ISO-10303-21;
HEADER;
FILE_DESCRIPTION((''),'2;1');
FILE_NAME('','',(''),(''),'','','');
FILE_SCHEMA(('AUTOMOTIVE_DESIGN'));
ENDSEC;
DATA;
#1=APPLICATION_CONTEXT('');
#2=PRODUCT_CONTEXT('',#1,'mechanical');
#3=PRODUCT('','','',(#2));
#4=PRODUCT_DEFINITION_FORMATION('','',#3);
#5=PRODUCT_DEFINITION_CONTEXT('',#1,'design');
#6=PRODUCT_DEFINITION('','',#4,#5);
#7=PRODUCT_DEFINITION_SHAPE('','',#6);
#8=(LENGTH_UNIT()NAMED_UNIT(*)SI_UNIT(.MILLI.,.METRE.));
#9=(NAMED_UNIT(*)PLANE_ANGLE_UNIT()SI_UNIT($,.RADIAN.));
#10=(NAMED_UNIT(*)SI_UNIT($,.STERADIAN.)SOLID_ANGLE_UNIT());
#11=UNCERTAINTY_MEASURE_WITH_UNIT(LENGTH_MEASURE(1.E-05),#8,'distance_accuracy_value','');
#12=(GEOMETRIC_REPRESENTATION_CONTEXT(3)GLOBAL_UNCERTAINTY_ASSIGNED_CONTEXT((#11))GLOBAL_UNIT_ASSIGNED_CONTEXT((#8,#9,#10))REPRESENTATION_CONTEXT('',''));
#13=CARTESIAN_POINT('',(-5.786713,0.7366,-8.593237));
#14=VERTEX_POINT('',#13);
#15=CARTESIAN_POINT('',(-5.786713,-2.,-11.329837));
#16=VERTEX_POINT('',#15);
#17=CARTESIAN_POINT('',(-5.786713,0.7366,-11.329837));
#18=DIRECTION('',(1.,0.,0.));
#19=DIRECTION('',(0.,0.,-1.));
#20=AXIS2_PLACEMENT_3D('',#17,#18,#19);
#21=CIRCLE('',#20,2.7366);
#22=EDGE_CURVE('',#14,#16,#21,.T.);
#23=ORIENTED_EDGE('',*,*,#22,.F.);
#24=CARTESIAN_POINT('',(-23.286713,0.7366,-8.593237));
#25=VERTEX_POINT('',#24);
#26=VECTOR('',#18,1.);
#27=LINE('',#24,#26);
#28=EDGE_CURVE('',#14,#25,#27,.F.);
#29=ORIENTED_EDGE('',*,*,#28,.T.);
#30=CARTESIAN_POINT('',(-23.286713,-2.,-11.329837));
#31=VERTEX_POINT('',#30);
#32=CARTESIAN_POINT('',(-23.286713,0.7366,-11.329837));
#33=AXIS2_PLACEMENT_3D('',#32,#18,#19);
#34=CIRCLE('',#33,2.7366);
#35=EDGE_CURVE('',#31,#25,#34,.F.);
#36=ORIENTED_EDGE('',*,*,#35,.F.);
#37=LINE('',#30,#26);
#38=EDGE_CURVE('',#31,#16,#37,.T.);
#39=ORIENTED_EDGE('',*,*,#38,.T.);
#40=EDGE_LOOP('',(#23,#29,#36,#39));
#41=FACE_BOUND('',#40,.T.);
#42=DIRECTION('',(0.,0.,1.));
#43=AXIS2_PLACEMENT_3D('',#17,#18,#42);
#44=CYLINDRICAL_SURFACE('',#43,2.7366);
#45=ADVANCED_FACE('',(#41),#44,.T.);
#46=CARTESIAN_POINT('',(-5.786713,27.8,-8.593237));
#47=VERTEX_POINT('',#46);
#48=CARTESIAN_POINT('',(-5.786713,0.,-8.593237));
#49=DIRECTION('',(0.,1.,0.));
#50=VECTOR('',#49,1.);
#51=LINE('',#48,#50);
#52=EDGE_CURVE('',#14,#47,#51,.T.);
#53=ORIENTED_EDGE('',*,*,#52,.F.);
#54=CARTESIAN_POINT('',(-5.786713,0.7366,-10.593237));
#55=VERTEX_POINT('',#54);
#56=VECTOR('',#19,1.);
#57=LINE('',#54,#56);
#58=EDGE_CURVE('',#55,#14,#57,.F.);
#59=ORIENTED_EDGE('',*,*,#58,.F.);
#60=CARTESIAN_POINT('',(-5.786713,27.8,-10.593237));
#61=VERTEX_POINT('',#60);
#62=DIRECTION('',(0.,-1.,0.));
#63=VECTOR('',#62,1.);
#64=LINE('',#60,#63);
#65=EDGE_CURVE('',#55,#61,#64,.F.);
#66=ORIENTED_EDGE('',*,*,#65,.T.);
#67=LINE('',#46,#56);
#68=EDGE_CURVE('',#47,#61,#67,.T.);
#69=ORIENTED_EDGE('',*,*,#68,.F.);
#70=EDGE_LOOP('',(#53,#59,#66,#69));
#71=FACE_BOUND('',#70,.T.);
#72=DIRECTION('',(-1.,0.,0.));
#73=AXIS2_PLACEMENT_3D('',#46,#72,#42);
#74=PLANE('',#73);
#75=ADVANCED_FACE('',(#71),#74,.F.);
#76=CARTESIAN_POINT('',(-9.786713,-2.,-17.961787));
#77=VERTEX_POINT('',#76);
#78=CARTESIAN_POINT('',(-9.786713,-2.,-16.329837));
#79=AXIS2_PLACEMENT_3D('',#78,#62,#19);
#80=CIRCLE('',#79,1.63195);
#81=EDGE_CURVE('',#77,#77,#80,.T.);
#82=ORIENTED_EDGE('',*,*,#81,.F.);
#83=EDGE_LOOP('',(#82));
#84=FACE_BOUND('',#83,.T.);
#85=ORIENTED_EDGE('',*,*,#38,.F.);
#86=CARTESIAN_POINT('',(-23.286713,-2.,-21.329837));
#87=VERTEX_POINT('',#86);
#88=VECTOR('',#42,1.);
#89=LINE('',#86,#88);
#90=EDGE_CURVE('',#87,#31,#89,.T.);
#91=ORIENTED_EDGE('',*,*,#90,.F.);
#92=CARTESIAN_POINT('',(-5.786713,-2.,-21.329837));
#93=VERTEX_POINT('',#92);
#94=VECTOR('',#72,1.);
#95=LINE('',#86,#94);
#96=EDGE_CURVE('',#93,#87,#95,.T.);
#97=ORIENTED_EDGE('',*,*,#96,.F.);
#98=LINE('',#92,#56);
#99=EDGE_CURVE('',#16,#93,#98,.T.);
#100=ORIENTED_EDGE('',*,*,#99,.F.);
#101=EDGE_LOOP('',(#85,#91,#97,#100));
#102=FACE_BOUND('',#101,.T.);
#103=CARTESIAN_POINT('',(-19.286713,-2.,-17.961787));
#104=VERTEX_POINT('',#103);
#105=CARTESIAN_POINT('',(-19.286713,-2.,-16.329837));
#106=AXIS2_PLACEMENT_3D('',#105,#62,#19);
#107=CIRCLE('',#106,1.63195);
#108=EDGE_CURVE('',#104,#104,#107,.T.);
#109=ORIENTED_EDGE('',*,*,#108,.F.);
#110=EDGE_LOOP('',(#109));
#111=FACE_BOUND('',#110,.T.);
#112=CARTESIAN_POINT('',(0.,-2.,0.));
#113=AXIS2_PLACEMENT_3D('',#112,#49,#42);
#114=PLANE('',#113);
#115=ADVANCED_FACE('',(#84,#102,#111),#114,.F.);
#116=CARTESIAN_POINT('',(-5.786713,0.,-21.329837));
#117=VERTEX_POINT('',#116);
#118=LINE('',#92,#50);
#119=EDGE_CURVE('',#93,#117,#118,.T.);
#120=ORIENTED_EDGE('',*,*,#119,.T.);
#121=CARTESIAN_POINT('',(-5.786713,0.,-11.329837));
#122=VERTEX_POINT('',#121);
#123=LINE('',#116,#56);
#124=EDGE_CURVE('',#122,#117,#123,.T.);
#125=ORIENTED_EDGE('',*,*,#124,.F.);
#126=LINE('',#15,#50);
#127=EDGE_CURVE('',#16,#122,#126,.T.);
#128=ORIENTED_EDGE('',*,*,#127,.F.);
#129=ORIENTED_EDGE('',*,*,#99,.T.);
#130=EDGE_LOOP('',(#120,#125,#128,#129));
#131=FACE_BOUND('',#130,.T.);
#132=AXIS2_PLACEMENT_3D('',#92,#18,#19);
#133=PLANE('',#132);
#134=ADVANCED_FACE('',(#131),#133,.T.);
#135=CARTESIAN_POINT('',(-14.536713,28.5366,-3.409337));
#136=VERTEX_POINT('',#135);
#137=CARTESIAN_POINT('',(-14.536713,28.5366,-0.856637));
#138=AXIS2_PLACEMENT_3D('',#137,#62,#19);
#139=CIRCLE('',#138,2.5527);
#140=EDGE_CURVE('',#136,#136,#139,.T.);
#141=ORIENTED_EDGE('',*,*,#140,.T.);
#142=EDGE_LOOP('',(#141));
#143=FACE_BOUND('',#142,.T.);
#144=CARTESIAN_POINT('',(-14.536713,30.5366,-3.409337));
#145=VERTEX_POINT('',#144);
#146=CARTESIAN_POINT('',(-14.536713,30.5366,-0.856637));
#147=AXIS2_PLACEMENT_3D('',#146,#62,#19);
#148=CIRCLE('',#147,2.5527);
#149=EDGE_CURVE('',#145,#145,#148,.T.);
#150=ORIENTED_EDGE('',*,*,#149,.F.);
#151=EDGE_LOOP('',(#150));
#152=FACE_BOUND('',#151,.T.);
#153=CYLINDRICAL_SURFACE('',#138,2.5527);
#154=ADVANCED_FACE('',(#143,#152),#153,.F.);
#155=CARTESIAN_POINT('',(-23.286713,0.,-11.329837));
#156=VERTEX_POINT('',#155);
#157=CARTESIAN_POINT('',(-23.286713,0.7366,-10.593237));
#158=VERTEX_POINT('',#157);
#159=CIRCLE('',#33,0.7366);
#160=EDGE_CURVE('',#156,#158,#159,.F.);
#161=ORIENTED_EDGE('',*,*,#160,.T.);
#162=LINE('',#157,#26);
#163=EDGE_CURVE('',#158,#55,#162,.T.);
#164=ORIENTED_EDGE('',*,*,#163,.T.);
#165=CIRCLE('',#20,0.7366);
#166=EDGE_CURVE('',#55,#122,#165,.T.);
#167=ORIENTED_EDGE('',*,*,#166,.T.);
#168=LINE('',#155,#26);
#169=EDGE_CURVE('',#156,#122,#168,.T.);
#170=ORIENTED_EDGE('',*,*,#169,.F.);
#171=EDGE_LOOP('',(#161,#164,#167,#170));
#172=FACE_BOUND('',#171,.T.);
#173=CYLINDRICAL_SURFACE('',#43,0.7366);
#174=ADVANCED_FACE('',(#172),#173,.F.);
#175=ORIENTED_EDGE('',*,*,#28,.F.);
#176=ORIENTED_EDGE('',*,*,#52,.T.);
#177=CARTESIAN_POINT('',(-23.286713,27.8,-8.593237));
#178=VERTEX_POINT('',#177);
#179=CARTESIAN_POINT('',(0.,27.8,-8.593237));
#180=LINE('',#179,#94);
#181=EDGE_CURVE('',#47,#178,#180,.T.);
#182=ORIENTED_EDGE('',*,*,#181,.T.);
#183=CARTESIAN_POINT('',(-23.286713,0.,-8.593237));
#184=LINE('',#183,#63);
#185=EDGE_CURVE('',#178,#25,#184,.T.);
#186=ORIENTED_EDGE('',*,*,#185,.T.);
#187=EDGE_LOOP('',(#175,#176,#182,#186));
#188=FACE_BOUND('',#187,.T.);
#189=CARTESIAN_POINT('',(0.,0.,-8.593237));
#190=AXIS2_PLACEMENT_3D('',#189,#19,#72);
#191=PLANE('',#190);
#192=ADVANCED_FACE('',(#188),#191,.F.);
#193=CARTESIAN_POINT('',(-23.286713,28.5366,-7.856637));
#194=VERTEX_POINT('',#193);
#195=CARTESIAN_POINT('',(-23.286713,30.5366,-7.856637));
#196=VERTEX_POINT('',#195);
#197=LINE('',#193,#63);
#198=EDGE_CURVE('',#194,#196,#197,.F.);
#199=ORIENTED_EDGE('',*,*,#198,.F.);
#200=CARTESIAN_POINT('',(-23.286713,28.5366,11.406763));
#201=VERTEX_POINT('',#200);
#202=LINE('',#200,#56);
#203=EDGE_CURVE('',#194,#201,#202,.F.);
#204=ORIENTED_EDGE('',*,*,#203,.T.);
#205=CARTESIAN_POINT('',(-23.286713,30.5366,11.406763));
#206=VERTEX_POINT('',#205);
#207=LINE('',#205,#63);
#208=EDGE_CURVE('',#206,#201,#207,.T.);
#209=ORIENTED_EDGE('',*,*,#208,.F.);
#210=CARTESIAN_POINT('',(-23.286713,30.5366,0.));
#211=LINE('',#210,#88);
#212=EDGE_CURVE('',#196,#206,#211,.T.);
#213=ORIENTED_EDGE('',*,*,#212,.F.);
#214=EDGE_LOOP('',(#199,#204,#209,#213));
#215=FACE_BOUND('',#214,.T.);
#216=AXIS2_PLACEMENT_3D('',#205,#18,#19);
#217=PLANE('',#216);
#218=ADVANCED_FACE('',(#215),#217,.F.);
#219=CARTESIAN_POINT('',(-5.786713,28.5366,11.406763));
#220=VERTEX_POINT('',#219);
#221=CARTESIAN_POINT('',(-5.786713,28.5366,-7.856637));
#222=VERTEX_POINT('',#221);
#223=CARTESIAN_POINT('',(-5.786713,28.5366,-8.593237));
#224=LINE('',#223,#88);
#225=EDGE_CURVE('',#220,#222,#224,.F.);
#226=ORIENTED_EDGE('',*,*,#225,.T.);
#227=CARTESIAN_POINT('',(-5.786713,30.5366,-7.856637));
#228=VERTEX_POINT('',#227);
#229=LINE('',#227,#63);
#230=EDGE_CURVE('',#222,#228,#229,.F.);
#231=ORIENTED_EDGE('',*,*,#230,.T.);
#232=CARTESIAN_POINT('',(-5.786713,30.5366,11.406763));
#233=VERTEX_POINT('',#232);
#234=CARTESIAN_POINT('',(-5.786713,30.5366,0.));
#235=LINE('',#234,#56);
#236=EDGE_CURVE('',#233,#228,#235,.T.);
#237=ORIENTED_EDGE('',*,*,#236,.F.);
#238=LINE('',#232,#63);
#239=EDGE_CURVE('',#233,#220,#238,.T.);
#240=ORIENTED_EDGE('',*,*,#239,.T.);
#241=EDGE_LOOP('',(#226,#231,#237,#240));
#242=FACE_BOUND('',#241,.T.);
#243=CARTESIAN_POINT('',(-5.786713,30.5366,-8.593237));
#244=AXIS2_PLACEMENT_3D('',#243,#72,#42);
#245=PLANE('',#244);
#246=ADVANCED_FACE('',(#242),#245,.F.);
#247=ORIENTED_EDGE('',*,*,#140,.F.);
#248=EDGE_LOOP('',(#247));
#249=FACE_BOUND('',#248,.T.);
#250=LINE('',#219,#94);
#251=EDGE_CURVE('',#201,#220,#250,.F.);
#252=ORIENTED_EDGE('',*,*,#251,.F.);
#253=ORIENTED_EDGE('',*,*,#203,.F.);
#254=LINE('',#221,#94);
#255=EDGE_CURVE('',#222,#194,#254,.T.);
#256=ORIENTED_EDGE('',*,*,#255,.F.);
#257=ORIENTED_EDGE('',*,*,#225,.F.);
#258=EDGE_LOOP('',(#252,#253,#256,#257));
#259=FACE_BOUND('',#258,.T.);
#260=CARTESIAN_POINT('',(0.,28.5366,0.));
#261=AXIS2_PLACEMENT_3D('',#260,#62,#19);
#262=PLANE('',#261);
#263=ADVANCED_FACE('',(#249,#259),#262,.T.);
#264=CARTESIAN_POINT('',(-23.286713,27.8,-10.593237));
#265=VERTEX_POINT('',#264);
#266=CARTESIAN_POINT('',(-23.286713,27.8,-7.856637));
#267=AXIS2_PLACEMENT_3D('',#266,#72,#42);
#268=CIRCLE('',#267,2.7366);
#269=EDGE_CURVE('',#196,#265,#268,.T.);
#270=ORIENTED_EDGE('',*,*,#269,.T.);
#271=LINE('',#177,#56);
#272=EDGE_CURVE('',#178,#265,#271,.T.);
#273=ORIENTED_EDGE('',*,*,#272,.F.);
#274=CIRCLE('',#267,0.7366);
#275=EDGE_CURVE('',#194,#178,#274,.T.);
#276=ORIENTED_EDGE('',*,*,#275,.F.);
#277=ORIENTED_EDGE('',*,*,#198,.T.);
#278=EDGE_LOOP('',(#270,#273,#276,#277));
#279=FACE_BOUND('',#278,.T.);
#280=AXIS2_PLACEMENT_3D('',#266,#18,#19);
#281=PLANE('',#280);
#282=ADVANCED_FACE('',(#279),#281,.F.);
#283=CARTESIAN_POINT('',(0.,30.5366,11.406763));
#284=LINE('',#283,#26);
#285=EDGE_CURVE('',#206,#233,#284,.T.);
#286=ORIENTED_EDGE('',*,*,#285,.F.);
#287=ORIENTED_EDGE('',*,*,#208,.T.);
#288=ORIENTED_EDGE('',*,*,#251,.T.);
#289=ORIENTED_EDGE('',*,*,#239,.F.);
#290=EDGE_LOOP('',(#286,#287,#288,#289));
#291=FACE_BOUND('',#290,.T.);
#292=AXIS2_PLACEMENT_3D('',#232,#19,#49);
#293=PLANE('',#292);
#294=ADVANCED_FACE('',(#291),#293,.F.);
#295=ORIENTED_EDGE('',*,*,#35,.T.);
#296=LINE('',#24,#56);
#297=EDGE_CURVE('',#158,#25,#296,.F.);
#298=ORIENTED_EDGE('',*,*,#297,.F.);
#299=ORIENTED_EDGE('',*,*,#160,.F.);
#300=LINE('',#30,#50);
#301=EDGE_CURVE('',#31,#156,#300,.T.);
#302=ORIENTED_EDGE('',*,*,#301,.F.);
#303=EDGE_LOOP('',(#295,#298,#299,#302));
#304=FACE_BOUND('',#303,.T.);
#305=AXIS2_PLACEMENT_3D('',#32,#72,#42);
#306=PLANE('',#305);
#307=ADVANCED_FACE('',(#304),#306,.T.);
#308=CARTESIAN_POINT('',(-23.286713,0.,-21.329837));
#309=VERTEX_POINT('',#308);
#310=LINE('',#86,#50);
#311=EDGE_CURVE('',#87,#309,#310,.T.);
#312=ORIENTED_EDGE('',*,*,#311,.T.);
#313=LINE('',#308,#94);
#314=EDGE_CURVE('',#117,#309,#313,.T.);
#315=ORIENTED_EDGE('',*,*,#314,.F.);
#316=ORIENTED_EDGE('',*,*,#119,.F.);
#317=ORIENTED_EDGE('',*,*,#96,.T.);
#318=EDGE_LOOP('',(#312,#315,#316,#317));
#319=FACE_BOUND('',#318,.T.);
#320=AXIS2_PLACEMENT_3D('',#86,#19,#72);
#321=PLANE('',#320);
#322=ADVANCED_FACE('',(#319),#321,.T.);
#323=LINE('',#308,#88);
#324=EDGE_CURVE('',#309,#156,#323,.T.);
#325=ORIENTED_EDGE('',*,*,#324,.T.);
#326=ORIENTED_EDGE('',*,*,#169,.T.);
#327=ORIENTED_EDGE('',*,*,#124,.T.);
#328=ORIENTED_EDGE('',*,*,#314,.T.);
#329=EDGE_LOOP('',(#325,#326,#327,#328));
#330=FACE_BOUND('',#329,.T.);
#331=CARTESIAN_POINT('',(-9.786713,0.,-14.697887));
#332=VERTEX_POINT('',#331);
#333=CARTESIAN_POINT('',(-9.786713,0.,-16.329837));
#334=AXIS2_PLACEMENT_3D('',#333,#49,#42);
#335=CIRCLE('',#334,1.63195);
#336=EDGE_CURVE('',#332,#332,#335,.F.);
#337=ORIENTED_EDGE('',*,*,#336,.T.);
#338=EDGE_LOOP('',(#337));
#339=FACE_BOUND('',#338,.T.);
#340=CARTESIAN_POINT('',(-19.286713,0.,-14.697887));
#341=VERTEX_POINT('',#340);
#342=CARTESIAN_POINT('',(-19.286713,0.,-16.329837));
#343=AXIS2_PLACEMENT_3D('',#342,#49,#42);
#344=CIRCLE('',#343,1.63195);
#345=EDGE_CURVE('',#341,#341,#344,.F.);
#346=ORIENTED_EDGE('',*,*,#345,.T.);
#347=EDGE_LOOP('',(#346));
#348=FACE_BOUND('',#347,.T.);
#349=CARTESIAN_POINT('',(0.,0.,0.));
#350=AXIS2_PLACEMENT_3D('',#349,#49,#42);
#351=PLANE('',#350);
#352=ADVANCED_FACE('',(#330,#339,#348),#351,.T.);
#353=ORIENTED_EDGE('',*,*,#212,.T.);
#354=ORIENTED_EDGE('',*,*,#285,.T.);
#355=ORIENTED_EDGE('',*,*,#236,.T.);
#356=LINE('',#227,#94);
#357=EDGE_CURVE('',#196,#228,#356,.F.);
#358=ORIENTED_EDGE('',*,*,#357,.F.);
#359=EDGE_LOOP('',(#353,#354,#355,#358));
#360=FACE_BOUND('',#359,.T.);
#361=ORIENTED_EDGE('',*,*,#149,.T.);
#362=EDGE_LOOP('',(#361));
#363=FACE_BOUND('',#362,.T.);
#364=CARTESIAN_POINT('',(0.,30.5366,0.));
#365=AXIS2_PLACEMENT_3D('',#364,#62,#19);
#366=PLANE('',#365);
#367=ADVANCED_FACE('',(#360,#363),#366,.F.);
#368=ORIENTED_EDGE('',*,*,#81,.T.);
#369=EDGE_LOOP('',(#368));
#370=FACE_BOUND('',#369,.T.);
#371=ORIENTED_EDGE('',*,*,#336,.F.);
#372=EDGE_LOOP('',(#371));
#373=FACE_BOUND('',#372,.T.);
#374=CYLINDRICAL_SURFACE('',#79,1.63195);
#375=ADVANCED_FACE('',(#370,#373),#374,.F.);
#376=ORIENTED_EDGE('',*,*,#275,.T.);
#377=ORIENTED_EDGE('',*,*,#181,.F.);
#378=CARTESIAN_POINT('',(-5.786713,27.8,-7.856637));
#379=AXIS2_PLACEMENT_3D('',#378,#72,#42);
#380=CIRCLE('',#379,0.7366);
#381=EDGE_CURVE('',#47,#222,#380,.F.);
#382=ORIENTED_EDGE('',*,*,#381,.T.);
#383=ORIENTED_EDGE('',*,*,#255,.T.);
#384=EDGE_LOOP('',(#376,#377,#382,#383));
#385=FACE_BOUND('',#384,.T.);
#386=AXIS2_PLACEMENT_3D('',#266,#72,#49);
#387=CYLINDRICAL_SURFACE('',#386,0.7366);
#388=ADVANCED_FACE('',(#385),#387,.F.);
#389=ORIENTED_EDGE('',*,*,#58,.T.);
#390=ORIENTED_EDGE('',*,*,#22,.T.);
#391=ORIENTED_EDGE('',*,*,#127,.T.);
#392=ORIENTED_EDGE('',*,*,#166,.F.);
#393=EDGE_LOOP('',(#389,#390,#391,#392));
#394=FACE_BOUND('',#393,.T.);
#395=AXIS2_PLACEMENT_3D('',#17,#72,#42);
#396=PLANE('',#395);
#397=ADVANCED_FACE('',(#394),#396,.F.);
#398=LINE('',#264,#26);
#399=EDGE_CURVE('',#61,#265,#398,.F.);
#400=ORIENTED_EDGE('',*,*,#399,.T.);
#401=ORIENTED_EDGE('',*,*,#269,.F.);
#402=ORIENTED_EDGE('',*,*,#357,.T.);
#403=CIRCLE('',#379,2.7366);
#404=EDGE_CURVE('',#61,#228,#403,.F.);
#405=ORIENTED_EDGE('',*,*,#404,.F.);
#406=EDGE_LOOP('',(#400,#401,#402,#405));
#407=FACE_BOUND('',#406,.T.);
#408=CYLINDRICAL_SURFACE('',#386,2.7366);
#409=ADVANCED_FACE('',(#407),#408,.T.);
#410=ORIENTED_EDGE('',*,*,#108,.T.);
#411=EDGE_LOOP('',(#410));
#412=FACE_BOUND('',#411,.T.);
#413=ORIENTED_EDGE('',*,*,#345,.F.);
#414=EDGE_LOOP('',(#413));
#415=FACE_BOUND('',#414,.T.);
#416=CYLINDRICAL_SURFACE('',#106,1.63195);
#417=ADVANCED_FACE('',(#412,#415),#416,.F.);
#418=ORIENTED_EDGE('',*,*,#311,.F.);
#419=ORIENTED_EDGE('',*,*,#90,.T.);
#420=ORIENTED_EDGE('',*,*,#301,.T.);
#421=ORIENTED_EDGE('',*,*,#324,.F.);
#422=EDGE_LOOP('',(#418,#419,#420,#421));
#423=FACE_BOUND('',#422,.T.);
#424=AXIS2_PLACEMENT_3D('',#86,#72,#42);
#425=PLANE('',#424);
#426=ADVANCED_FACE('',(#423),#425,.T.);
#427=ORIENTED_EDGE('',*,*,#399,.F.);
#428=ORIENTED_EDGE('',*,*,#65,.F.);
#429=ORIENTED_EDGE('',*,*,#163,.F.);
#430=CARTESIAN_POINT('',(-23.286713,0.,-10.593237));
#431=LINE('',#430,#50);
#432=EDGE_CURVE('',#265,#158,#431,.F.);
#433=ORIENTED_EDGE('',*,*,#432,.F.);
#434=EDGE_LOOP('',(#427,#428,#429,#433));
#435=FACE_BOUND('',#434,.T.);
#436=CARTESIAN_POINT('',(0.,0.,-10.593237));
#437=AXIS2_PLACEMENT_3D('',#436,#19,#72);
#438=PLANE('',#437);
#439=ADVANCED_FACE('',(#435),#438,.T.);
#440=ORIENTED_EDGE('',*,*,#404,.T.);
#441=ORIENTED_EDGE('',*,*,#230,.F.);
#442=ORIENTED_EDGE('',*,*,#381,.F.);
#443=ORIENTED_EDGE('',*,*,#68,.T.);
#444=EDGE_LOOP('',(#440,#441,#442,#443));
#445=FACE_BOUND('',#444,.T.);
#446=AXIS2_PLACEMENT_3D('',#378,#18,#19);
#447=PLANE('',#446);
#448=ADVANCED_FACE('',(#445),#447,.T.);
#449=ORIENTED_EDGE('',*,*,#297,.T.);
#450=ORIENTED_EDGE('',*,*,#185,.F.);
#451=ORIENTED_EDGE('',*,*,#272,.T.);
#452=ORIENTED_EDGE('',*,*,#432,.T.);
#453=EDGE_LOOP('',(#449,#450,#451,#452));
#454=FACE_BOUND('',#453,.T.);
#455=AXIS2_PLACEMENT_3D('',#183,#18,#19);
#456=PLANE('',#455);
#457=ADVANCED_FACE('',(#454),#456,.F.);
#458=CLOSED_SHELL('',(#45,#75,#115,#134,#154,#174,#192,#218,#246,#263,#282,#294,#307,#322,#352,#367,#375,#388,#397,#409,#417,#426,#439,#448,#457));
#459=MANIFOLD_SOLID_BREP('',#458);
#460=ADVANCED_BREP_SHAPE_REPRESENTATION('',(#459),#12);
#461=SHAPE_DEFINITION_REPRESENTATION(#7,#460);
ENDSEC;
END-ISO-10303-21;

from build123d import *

# Parameters (mm, degrees)
SKETCH1_W                  = 17.5
SKETCH1_H                  = 10
BASE_FLANGE1_DEPTH         = 2
F_4_CLEARANCE_HOLE1_D      = 3.2639
F_4_CLEARANCE_HOLE1_DEPTH  = 2
F_4_CLEARANCE_HOLE1_TIP    = 0.980574487
EDGE_FLANGE2_DEPTH         = 17.5
EDGE_FLANGE3_DEPTH         = 17.5
F_10_CLEARANCE_HOLE1_D     = 5.1054
F_10_CLEARANCE_HOLE1_DEPTH = 7.6
F_10_CLEARANCE_HOLE1_TIP   = 1.533816902


# Sheet-metal steps are written as plain solids
with BuildPart() as part:
    # Sketch1 → Base-Flange1 (new body)
    with BuildSketch(Plane(origin=(0, 0, 0), x_dir=(1, 0, 0), z_dir=(0, 1, 0))):
        with Locations((-14.536713287, 16.32983683)):
            Rectangle(SKETCH1_W, SKETCH1_H)
    extrude(amount=-BASE_FLANGE1_DEPTH)

    # #4 Clearance Hole1
    with Locations(Plane.XZ.offset(2)):
        with Locations((-9.786713287, -16.32983683), (-19.286713287, -16.32983683)):
            Hole(F_4_CLEARANCE_HOLE1_D / 2, depth=F_4_CLEARANCE_HOLE1_DEPTH)
            with Locations((0, 0, -(F_4_CLEARANCE_HOLE1_DEPTH + F_4_CLEARANCE_HOLE1_TIP / 2))):  # 118° drill point
                Cone(0, F_4_CLEARANCE_HOLE1_D / 2, F_4_CLEARANCE_HOLE1_TIP, mode=Mode.SUBTRACT)

    # Edge-Flange2 section (across the edge) → Edge-Flange2 (add)
    with BuildSketch(Plane(origin=(-23.286713287, 0, -10.59323683), x_dir=(0, 0, -1), z_dir=(1, 0, 0))):
        with BuildLine():
            Line((-2, 0.7366), (-2, 27.8))
            Line((-2, 27.8), (0, 27.8))
            Line((0, 27.8), (0, 0.7366))
            ThreePointArc((0, 0.7366), (0.215745145, 0.215745145), (0.7366, 0))
            Line((0.7366, 0), (0.7366, -2))
            ThreePointArc((0.7366, -2), (-1.198468417, -1.198468417), (-2, 0.7366))
        make_face()
    extrude(amount=EDGE_FLANGE2_DEPTH)

    # Edge-Flange3 section (across the edge) → Edge-Flange3 (add)
    with BuildSketch(Plane(origin=(-5.786713287, 28.5366, -8.59323683), x_dir=(0, -1, 0), z_dir=(-1, 0, 0))):
        with BuildLine():
            Line((-2, 0.7366), (-2, 20))
            Line((-2, 20), (0, 20))
            Line((0, 20), (0, 0.7366))
            ThreePointArc((0, 0.7366), (0.215745145, 0.215745145), (0.7366, 0))
            Line((0.7366, 0), (0.7366, -2))
            ThreePointArc((0.7366, -2), (-1.198468417, -1.198468417), (-2, 0.7366))
        make_face()
    extrude(amount=EDGE_FLANGE3_DEPTH)

    # #10 Clearance Hole1
    with Locations(Plane(origin=(0, 28.5366, 0), x_dir=(-1, 0, 0), z_dir=(0, -1, 0))):
        with Locations((14.536713287, 0.85663683)):
            Hole(F_10_CLEARANCE_HOLE1_D / 2, depth=F_10_CLEARANCE_HOLE1_DEPTH)
            with Locations((0, 0, -(F_10_CLEARANCE_HOLE1_DEPTH + F_10_CLEARANCE_HOLE1_TIP / 2))):  # 118° drill point
                Cone(0, F_10_CLEARANCE_HOLE1_D / 2, F_10_CLEARANCE_HOLE1_TIP, mode=Mode.SUBTRACT)


solid = part.part
